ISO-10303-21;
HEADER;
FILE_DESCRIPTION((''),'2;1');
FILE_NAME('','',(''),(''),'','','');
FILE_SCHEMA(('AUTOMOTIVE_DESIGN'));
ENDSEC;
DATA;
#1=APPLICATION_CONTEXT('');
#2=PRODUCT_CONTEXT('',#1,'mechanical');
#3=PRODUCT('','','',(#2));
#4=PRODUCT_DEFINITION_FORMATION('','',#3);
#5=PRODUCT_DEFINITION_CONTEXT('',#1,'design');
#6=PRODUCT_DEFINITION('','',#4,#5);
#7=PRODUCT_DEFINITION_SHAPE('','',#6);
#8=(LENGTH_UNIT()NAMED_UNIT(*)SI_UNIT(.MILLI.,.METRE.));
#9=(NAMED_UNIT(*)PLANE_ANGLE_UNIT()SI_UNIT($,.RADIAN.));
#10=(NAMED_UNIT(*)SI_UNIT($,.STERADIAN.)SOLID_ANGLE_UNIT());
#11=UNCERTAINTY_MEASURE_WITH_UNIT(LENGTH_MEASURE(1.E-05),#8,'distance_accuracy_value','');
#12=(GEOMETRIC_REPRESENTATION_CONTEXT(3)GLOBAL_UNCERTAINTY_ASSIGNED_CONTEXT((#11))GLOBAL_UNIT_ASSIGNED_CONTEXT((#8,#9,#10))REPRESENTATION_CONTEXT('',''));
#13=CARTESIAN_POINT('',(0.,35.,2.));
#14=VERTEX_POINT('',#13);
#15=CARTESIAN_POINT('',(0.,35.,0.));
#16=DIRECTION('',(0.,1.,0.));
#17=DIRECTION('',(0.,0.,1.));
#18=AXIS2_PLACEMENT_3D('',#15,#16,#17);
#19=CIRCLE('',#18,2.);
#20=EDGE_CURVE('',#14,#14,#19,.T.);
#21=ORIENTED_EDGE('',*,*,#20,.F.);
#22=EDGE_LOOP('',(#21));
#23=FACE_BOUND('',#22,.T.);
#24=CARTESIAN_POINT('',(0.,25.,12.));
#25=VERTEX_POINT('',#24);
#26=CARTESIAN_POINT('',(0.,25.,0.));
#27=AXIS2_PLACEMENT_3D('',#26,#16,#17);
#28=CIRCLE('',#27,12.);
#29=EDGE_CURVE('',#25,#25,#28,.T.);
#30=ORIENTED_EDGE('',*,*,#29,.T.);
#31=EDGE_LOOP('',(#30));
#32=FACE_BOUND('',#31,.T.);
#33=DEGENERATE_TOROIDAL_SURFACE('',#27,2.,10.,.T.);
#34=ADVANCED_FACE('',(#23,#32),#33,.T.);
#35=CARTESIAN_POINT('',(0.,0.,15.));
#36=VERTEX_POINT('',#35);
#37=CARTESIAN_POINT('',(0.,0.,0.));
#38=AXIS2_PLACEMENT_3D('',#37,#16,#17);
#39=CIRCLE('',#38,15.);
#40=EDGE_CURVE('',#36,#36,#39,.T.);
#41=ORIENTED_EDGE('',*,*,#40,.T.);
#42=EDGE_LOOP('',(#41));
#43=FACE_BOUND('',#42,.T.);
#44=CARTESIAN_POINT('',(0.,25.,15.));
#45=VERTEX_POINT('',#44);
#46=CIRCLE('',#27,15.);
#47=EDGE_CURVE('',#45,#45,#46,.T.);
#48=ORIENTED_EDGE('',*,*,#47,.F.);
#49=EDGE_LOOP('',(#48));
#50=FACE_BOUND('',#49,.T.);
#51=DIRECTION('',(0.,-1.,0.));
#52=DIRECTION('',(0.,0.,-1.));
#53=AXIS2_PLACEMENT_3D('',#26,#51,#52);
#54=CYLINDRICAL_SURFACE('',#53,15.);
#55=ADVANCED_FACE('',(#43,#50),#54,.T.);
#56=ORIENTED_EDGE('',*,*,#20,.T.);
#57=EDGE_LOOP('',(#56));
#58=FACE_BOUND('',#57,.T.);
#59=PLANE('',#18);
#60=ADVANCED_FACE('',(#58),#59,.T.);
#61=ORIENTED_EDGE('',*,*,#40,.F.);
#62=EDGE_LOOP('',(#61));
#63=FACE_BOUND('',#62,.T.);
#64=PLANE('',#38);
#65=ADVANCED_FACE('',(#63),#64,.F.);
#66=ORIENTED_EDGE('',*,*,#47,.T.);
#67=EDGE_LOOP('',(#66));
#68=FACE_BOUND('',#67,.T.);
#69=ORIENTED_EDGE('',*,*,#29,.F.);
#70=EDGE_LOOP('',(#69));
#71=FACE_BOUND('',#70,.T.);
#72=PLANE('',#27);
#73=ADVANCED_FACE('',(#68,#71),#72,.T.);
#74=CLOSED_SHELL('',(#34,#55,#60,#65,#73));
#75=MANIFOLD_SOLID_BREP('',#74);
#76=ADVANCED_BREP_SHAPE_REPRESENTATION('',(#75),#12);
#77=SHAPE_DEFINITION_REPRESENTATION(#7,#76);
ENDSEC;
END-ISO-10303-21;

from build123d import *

# Parameters (mm, degrees)
SKETCH1_R           = 15
BOSS_EXTRUDE1_DEPTH = 25
SKETCH2_R           = 12
CUT_EXTRUDE1_DEPTH  = 10
BOSS_EXTRUDE2_START = 20
SKETCH3_R           = 12
BOSS_EXTRUDE2_DEPTH = 20
FILLET1_R           = 10


with BuildPart() as part:
    # Sketch1 → Boss-Extrude1 (new body)
    with BuildSketch(Plane(origin=(0, 0, 0), x_dir=(1, 0, 0), z_dir=(0, 1, 0))):
        with Locations(Location((0, 0, 0), (0, 0, 270))):
            Circle(SKETCH1_R)
    extrude(amount=BOSS_EXTRUDE1_DEPTH)

    # Sketch2 → Cut-Extrude1 (cut)
    with BuildSketch(Plane(origin=(0, 25, 0), x_dir=(1, 0, 0), z_dir=(0, 1, 0))):
        with Locations(Location((0, 0, 0), (0, 0, 270))):
            Circle(SKETCH2_R)
    extrude(amount=-CUT_EXTRUDE1_DEPTH, mode=Mode.SUBTRACT)

    # Sketch3 → Boss-Extrude2 (add)
    with BuildSketch(Plane(origin=(0, 15, 0), x_dir=(1, 0, 0), z_dir=(0, 1, 0)).offset(BOSS_EXTRUDE2_START)):
        with Locations(Location((0, 0, 0), (0, 0, 270))):
            Circle(SKETCH3_R)
    extrude(amount=-BOSS_EXTRUDE2_DEPTH)

    # Fillet1
    fillet1_edges = [part.edges().sort_by_distance(p)[0] for p in [
        (0, 35, -12),
    ]]
    fillet(fillet1_edges, radius=FILLET1_R - 0.0001)  # a hair under: the kernel refuses the full size


solid = part.part
